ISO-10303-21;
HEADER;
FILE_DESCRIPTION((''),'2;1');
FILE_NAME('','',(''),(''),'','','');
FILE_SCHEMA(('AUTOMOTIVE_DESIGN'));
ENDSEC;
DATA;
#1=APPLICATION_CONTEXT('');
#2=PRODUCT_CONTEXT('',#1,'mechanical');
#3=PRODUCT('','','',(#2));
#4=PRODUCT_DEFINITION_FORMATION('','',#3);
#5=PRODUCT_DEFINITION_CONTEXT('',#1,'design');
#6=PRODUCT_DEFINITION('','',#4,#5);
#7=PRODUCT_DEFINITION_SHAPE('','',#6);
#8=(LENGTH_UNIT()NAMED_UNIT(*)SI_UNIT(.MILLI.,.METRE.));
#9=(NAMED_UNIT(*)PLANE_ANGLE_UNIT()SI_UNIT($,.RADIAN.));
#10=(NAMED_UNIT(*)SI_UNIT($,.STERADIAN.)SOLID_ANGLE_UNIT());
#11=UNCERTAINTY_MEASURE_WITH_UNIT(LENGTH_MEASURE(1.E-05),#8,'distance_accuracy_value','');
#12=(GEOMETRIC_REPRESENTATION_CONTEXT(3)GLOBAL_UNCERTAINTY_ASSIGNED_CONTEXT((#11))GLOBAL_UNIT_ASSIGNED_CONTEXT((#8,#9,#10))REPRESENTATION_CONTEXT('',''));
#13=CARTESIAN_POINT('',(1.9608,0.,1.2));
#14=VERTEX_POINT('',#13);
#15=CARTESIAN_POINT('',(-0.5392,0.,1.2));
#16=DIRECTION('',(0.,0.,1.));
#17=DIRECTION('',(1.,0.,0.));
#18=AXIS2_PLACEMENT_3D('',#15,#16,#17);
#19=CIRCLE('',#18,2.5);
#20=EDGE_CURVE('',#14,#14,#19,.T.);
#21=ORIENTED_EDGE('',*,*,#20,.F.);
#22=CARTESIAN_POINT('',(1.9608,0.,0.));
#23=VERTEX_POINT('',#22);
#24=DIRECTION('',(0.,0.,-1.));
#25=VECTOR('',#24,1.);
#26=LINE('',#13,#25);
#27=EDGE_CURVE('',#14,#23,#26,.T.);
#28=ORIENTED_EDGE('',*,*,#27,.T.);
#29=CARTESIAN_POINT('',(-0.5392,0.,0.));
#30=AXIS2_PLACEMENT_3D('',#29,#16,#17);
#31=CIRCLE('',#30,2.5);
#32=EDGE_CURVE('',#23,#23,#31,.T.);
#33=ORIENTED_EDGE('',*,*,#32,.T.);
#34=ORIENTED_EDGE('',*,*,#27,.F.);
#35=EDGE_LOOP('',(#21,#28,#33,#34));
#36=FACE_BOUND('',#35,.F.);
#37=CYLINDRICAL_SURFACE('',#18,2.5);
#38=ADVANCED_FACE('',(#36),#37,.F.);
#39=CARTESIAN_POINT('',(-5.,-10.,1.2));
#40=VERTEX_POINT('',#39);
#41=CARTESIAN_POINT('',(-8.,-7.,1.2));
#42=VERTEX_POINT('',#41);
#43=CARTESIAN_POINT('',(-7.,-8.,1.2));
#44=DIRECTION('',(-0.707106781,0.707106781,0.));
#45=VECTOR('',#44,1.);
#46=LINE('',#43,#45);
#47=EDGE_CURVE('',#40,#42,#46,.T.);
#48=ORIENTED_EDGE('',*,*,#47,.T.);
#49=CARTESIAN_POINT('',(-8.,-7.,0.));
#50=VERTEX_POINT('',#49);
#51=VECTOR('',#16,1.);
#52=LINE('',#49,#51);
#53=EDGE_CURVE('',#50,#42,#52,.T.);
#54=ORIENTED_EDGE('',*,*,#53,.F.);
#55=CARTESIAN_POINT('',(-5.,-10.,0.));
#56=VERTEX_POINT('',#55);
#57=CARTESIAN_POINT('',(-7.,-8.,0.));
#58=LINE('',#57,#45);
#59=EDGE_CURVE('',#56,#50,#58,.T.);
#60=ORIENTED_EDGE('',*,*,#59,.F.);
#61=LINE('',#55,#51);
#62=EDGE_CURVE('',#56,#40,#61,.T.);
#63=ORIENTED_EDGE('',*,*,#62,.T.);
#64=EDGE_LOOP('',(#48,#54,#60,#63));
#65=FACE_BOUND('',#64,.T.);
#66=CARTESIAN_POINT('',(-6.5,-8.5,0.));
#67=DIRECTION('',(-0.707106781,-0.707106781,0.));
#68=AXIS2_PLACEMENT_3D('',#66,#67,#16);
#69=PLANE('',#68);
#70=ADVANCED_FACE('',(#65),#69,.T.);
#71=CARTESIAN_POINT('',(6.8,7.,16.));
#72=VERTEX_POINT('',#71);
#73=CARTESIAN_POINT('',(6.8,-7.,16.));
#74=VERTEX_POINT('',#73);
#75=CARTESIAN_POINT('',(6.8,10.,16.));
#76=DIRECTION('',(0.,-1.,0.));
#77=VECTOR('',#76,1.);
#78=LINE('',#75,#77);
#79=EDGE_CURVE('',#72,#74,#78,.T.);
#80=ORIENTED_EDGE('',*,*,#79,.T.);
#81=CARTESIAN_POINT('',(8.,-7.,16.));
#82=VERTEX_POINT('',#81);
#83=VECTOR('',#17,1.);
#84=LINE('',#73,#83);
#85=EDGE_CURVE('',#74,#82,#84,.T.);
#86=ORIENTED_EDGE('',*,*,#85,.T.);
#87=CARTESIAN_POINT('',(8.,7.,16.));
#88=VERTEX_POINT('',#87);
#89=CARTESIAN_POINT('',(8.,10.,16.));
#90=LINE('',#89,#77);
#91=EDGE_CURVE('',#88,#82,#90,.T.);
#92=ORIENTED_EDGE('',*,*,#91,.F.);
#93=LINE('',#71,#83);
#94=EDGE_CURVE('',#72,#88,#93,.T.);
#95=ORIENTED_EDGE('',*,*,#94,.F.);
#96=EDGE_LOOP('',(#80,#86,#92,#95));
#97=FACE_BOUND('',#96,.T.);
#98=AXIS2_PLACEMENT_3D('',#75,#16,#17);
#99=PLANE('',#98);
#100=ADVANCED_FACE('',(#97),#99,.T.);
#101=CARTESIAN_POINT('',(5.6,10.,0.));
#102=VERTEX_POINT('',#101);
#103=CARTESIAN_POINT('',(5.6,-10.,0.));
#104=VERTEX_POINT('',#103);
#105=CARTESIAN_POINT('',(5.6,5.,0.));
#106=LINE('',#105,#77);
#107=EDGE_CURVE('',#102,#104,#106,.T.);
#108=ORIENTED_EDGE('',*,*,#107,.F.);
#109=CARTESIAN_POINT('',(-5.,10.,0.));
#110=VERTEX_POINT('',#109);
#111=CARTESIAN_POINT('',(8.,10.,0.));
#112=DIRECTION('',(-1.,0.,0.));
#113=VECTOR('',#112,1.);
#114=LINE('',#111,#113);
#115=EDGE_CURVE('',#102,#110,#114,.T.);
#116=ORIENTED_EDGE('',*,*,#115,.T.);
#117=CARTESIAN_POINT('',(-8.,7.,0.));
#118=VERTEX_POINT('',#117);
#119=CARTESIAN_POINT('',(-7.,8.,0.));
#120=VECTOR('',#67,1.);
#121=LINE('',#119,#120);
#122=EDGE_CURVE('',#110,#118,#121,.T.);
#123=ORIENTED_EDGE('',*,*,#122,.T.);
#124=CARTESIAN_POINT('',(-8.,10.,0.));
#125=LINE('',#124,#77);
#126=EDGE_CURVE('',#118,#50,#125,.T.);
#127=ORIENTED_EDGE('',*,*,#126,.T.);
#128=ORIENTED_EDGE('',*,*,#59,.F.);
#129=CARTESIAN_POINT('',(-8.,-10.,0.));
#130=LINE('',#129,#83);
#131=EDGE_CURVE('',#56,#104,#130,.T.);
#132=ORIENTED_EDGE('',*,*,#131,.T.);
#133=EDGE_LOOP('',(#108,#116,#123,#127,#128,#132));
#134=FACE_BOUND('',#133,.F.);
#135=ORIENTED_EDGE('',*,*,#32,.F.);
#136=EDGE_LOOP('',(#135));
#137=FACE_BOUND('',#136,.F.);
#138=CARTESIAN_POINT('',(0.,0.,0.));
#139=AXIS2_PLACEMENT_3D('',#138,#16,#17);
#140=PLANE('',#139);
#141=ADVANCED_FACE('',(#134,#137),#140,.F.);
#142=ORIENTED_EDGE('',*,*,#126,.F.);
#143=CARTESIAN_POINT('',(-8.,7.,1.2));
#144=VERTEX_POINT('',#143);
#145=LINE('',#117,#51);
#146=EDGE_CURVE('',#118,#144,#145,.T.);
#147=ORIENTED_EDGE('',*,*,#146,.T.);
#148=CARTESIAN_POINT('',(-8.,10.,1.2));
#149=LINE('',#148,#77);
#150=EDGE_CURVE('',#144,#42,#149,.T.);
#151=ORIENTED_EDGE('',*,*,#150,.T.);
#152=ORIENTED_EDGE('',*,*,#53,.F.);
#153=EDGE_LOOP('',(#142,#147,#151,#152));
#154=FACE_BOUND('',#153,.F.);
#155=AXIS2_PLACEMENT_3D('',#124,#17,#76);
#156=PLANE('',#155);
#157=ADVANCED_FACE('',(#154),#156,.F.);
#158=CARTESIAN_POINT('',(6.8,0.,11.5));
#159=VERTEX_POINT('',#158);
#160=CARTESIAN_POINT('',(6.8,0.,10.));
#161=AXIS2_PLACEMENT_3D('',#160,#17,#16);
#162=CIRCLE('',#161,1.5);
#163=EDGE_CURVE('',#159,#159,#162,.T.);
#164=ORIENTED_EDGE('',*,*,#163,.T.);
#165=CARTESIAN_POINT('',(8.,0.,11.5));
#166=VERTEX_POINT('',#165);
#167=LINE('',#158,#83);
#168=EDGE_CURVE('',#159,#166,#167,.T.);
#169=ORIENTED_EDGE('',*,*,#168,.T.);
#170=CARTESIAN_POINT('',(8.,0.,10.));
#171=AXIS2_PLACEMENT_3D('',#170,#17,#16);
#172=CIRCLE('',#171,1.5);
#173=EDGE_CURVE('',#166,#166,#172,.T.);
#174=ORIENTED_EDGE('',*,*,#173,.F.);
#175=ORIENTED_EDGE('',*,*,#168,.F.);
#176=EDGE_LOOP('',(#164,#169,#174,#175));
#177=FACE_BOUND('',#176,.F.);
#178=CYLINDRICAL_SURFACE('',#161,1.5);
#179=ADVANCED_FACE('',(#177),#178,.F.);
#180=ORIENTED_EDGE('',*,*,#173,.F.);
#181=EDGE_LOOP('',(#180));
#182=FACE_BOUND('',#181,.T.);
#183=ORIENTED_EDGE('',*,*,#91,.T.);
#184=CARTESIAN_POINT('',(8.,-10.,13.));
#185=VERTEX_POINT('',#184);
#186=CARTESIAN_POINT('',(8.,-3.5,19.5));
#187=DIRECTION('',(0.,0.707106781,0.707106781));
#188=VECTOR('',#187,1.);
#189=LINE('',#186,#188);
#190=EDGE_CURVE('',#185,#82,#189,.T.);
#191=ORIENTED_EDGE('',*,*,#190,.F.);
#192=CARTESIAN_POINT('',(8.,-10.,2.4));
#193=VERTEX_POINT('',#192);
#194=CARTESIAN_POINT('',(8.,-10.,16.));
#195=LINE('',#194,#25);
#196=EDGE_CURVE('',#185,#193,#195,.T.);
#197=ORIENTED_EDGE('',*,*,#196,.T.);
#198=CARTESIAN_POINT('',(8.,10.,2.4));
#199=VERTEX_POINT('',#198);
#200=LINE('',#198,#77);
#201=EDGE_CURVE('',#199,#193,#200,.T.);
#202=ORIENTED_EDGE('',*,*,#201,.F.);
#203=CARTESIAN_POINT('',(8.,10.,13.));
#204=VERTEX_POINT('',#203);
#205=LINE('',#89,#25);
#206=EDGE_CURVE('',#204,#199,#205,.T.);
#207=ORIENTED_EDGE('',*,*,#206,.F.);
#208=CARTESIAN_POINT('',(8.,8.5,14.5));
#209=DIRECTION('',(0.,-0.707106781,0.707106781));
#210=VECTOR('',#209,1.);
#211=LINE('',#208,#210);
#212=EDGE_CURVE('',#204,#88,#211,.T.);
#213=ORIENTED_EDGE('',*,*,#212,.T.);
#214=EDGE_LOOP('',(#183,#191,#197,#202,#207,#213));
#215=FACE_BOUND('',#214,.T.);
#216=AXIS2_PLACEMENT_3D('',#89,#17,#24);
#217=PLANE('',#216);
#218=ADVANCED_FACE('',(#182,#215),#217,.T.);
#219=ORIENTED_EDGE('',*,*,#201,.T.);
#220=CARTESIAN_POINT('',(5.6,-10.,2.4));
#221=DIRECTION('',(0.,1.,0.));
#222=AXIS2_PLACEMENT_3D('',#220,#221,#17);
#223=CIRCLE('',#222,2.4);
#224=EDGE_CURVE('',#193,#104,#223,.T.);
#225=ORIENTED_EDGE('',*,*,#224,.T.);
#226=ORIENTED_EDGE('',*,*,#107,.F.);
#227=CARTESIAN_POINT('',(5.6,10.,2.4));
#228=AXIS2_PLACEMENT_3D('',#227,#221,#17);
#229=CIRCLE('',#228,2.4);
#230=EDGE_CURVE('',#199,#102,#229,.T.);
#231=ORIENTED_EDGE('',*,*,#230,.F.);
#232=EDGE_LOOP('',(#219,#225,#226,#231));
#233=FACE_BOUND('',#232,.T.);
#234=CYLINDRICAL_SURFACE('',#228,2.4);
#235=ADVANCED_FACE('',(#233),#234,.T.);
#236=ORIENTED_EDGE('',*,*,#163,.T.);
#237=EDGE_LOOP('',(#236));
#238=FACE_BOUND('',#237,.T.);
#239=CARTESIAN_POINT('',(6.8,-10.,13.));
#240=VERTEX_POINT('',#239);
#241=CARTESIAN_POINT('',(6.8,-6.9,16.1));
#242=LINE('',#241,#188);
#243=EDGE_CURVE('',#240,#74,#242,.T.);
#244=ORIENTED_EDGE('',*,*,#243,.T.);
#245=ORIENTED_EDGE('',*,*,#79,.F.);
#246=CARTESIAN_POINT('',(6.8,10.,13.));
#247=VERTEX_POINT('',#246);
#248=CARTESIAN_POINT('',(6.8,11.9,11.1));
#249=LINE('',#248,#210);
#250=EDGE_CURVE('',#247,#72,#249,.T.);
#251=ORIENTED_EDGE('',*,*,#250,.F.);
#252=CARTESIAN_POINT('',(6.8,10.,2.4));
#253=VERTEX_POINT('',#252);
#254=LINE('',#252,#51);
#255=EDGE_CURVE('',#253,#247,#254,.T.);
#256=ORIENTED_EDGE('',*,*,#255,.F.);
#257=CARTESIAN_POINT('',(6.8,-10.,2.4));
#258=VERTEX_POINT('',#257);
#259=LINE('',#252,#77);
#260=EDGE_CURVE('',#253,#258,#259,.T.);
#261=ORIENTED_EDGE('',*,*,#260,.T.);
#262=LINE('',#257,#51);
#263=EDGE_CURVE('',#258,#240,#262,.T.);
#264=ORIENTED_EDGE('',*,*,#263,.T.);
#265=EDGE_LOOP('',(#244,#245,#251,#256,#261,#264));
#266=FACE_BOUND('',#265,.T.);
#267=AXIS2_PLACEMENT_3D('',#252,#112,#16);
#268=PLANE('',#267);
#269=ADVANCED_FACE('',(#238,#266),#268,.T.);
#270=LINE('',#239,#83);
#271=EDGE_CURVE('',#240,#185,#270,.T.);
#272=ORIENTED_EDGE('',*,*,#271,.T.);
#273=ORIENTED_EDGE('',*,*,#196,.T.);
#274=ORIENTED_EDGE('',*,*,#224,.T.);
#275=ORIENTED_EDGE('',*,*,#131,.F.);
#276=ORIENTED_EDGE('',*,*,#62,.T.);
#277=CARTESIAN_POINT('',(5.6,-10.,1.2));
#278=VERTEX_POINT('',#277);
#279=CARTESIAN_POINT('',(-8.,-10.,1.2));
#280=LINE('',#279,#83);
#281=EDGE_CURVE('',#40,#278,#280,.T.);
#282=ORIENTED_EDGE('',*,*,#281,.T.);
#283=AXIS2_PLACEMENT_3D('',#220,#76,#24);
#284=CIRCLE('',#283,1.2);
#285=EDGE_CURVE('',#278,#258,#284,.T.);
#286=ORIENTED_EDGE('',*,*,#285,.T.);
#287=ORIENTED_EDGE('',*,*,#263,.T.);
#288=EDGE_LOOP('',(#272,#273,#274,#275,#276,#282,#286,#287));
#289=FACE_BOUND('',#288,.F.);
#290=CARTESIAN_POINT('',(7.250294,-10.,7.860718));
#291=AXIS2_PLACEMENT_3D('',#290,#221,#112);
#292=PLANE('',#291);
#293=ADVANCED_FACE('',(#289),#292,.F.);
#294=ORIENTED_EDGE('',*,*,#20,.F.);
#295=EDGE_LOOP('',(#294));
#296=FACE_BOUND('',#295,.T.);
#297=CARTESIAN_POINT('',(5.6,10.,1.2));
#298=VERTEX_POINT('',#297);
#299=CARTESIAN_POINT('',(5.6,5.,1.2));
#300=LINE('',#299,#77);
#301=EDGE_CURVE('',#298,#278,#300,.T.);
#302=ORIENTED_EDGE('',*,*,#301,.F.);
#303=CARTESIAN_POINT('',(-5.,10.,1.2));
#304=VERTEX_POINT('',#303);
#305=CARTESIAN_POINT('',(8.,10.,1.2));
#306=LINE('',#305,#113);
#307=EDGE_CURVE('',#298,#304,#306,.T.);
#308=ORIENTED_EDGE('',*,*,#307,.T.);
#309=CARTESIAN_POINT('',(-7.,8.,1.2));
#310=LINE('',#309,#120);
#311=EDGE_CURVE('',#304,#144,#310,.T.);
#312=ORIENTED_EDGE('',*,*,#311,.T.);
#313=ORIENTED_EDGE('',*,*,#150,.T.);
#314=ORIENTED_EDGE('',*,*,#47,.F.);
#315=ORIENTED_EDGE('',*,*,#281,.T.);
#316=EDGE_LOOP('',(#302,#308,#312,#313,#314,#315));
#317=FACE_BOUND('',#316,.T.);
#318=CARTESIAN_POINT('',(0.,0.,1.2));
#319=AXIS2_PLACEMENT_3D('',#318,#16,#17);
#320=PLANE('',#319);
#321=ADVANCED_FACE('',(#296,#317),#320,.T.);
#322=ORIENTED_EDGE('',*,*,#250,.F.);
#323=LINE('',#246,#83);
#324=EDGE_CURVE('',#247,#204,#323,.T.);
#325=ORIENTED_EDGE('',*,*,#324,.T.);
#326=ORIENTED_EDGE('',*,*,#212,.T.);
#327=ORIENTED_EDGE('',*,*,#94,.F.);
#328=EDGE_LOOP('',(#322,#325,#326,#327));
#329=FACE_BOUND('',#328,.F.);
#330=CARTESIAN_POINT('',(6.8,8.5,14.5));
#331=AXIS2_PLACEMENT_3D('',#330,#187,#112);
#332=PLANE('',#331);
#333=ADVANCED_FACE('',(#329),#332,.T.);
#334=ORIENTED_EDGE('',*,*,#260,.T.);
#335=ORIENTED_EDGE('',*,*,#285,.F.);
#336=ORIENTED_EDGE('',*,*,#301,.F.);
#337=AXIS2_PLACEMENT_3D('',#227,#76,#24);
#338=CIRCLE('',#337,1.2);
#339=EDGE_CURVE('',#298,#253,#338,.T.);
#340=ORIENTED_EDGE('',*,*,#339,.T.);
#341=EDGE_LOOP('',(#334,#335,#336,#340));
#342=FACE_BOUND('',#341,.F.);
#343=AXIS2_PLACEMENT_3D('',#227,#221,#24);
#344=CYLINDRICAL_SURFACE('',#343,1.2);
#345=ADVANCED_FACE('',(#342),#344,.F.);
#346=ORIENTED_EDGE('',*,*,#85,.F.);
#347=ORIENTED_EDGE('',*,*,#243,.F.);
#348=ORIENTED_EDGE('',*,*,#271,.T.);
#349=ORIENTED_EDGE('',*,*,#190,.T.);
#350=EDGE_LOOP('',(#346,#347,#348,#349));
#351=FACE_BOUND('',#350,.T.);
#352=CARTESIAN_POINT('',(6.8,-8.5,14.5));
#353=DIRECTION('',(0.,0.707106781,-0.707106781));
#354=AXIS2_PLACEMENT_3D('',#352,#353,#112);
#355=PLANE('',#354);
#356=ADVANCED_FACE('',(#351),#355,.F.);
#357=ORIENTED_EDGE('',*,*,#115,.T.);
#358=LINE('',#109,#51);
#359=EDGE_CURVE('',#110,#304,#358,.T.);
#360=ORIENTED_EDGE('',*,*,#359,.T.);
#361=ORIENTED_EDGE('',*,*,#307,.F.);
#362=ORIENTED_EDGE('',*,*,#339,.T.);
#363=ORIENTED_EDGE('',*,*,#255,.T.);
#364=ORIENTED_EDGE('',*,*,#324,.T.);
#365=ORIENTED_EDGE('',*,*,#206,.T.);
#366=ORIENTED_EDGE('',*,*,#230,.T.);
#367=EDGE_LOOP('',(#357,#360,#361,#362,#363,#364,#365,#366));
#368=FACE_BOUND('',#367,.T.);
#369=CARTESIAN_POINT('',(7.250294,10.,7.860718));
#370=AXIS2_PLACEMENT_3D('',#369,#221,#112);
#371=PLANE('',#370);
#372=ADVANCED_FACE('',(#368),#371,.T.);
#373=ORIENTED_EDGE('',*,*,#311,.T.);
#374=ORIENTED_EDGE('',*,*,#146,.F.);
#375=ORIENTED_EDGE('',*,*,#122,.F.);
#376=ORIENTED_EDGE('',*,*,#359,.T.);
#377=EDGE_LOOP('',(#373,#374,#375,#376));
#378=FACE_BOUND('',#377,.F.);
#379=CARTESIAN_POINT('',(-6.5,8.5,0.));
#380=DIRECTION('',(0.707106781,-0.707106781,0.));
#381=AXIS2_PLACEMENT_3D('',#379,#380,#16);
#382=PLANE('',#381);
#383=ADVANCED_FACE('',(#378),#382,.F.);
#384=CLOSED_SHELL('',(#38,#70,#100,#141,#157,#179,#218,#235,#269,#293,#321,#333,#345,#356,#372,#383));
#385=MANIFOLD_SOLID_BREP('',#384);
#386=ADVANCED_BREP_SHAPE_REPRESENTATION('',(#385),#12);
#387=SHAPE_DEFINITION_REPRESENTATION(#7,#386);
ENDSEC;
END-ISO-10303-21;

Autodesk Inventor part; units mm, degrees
ref_plane "YZ Plane" through (0, 0, 0) normal (1, 0, 0) x (0, 1, 0)
ref_plane "XZ Plane" through (0, 0, 0) normal (0, 1, 0) x (-1, 0, 0)
ref_plane "XY Plane" through (0, 0, 0) normal (0, 0, 1) x (1, 0, 0)
sketch "Sketch1" plane through (0, 0, 0) normal (0, 0, 1) x (1, 0, 0)
  line L0 (-8, -10) -> (8, -10)
  line L1 (8, -10) -> (8, 10)
  line L2 (8, 10) -> (-8, 10)
  line L3 (-8, 10) -> (-8, -10)
  line L4 (-8, -10) -> (8, 10) construction
  line L5 (8, -10) -> (-8, 10) construction
  point P0 (0, 0)
  dimension "d0" = 16
  dimension "d1" = 20
extrude "Plate1" add sketch "Sketch1" along normal blind 1.2
sketch "Sketch2" plane through (6.8, 10, 0) normal (1, 0, 0) x (0, 1, 0)
  line L0 (-20, 0) -> (0, 0)
  line L1 (0, 0) -> (0, 16)
  line L2 (0, 16) -> (-20, 16)
  line L3 (-20, 16) -> (-20, 0)
edge flange "Flange1" height 16 angle 90 thickness 1.2 bend radius 1.2 thickness toward (1, 0, 0) relief tear relief width 1.2 relief depth 0.6 edges at (8, 0, 1.2) wall of the first edge with corners at (6.8, -10, 0) (6.8, 10, 0) (6.8, 10, 16) (6.8, -10, 16)
bend "Bend1"
corner "Corner1"
chamfer "Corner Chamfer1" distance 3 angle 45 4 edges at (-8, 10, 0.6) (-8, -10, 0.6) (7.4, -10, 16) (7.4, 10, 16)
sketch "Sketch3" plane through (6.8, -10, 2.4) normal (-1, 0, 0) x (0, 0, 1)
  line L0 (13.6, 3) -> (13.6, 17) projected
  line L1 (-2.4, 17) -> (-2.4, 3) projected
  point P0 (-2.4, 10)
  point P1 (7.6, 10)
  point P2 (-2.4, 10)
  dimension "d16" = 6
hole "Hole1" at (6.8, 0, 10) direction (1, 0, 0) diameter 3 depth 1.2 tip angle 118
sketch "Sketch4" plane through (0, 0, 1.2) normal (0, 0, 1) x (1, 0, 0)
  circle A0 centre (-0.5392, 0) radius 2.1 construction
  circle A1 centre (-0.5392, 0) radius 2.5
  point P0 (0, 0)
  dimension "d24" = 0.4
extrude "Cut1" cut sketch "Sketch4" against normal blind 1.2
equation "\"d22\" = Thickness"
equation "\"d25\" = Thickness"
equation "\"d3\" = BendReliefWidth"
equation "\"d4\" = BendReliefDepth"
equation "\"d5\" = MinimumRemnant"
equation "\"d6\" = BendRadius"
equation "\"d9\" = BendRadius"
equation "\"d10\" = CornerReliefSize"
equation "\"d11\" = GapSize"
equation "\"d12\" = JacobiRadiusSize"
equation "\"BendRadius\" = Thickness"
equation "\"BendReliefWidth\" = Thickness"
equation "\"BendReliefDepth\" = 0.5 * Thickness"
equation "\"CornerReliefSize\" = 4 * Thickness"
equation "\"MinimumRemnant\" = 2 * Thickness"
equation "\"TransitionRadius\" = BendRadius"
equation "\"JacobiRadiusSize\" = BendRadius"
equation "\"GapSize\" = Thickness"
equation "\"d2\" = BendRadius"
equation "\"Thickness\" = 1.2"
